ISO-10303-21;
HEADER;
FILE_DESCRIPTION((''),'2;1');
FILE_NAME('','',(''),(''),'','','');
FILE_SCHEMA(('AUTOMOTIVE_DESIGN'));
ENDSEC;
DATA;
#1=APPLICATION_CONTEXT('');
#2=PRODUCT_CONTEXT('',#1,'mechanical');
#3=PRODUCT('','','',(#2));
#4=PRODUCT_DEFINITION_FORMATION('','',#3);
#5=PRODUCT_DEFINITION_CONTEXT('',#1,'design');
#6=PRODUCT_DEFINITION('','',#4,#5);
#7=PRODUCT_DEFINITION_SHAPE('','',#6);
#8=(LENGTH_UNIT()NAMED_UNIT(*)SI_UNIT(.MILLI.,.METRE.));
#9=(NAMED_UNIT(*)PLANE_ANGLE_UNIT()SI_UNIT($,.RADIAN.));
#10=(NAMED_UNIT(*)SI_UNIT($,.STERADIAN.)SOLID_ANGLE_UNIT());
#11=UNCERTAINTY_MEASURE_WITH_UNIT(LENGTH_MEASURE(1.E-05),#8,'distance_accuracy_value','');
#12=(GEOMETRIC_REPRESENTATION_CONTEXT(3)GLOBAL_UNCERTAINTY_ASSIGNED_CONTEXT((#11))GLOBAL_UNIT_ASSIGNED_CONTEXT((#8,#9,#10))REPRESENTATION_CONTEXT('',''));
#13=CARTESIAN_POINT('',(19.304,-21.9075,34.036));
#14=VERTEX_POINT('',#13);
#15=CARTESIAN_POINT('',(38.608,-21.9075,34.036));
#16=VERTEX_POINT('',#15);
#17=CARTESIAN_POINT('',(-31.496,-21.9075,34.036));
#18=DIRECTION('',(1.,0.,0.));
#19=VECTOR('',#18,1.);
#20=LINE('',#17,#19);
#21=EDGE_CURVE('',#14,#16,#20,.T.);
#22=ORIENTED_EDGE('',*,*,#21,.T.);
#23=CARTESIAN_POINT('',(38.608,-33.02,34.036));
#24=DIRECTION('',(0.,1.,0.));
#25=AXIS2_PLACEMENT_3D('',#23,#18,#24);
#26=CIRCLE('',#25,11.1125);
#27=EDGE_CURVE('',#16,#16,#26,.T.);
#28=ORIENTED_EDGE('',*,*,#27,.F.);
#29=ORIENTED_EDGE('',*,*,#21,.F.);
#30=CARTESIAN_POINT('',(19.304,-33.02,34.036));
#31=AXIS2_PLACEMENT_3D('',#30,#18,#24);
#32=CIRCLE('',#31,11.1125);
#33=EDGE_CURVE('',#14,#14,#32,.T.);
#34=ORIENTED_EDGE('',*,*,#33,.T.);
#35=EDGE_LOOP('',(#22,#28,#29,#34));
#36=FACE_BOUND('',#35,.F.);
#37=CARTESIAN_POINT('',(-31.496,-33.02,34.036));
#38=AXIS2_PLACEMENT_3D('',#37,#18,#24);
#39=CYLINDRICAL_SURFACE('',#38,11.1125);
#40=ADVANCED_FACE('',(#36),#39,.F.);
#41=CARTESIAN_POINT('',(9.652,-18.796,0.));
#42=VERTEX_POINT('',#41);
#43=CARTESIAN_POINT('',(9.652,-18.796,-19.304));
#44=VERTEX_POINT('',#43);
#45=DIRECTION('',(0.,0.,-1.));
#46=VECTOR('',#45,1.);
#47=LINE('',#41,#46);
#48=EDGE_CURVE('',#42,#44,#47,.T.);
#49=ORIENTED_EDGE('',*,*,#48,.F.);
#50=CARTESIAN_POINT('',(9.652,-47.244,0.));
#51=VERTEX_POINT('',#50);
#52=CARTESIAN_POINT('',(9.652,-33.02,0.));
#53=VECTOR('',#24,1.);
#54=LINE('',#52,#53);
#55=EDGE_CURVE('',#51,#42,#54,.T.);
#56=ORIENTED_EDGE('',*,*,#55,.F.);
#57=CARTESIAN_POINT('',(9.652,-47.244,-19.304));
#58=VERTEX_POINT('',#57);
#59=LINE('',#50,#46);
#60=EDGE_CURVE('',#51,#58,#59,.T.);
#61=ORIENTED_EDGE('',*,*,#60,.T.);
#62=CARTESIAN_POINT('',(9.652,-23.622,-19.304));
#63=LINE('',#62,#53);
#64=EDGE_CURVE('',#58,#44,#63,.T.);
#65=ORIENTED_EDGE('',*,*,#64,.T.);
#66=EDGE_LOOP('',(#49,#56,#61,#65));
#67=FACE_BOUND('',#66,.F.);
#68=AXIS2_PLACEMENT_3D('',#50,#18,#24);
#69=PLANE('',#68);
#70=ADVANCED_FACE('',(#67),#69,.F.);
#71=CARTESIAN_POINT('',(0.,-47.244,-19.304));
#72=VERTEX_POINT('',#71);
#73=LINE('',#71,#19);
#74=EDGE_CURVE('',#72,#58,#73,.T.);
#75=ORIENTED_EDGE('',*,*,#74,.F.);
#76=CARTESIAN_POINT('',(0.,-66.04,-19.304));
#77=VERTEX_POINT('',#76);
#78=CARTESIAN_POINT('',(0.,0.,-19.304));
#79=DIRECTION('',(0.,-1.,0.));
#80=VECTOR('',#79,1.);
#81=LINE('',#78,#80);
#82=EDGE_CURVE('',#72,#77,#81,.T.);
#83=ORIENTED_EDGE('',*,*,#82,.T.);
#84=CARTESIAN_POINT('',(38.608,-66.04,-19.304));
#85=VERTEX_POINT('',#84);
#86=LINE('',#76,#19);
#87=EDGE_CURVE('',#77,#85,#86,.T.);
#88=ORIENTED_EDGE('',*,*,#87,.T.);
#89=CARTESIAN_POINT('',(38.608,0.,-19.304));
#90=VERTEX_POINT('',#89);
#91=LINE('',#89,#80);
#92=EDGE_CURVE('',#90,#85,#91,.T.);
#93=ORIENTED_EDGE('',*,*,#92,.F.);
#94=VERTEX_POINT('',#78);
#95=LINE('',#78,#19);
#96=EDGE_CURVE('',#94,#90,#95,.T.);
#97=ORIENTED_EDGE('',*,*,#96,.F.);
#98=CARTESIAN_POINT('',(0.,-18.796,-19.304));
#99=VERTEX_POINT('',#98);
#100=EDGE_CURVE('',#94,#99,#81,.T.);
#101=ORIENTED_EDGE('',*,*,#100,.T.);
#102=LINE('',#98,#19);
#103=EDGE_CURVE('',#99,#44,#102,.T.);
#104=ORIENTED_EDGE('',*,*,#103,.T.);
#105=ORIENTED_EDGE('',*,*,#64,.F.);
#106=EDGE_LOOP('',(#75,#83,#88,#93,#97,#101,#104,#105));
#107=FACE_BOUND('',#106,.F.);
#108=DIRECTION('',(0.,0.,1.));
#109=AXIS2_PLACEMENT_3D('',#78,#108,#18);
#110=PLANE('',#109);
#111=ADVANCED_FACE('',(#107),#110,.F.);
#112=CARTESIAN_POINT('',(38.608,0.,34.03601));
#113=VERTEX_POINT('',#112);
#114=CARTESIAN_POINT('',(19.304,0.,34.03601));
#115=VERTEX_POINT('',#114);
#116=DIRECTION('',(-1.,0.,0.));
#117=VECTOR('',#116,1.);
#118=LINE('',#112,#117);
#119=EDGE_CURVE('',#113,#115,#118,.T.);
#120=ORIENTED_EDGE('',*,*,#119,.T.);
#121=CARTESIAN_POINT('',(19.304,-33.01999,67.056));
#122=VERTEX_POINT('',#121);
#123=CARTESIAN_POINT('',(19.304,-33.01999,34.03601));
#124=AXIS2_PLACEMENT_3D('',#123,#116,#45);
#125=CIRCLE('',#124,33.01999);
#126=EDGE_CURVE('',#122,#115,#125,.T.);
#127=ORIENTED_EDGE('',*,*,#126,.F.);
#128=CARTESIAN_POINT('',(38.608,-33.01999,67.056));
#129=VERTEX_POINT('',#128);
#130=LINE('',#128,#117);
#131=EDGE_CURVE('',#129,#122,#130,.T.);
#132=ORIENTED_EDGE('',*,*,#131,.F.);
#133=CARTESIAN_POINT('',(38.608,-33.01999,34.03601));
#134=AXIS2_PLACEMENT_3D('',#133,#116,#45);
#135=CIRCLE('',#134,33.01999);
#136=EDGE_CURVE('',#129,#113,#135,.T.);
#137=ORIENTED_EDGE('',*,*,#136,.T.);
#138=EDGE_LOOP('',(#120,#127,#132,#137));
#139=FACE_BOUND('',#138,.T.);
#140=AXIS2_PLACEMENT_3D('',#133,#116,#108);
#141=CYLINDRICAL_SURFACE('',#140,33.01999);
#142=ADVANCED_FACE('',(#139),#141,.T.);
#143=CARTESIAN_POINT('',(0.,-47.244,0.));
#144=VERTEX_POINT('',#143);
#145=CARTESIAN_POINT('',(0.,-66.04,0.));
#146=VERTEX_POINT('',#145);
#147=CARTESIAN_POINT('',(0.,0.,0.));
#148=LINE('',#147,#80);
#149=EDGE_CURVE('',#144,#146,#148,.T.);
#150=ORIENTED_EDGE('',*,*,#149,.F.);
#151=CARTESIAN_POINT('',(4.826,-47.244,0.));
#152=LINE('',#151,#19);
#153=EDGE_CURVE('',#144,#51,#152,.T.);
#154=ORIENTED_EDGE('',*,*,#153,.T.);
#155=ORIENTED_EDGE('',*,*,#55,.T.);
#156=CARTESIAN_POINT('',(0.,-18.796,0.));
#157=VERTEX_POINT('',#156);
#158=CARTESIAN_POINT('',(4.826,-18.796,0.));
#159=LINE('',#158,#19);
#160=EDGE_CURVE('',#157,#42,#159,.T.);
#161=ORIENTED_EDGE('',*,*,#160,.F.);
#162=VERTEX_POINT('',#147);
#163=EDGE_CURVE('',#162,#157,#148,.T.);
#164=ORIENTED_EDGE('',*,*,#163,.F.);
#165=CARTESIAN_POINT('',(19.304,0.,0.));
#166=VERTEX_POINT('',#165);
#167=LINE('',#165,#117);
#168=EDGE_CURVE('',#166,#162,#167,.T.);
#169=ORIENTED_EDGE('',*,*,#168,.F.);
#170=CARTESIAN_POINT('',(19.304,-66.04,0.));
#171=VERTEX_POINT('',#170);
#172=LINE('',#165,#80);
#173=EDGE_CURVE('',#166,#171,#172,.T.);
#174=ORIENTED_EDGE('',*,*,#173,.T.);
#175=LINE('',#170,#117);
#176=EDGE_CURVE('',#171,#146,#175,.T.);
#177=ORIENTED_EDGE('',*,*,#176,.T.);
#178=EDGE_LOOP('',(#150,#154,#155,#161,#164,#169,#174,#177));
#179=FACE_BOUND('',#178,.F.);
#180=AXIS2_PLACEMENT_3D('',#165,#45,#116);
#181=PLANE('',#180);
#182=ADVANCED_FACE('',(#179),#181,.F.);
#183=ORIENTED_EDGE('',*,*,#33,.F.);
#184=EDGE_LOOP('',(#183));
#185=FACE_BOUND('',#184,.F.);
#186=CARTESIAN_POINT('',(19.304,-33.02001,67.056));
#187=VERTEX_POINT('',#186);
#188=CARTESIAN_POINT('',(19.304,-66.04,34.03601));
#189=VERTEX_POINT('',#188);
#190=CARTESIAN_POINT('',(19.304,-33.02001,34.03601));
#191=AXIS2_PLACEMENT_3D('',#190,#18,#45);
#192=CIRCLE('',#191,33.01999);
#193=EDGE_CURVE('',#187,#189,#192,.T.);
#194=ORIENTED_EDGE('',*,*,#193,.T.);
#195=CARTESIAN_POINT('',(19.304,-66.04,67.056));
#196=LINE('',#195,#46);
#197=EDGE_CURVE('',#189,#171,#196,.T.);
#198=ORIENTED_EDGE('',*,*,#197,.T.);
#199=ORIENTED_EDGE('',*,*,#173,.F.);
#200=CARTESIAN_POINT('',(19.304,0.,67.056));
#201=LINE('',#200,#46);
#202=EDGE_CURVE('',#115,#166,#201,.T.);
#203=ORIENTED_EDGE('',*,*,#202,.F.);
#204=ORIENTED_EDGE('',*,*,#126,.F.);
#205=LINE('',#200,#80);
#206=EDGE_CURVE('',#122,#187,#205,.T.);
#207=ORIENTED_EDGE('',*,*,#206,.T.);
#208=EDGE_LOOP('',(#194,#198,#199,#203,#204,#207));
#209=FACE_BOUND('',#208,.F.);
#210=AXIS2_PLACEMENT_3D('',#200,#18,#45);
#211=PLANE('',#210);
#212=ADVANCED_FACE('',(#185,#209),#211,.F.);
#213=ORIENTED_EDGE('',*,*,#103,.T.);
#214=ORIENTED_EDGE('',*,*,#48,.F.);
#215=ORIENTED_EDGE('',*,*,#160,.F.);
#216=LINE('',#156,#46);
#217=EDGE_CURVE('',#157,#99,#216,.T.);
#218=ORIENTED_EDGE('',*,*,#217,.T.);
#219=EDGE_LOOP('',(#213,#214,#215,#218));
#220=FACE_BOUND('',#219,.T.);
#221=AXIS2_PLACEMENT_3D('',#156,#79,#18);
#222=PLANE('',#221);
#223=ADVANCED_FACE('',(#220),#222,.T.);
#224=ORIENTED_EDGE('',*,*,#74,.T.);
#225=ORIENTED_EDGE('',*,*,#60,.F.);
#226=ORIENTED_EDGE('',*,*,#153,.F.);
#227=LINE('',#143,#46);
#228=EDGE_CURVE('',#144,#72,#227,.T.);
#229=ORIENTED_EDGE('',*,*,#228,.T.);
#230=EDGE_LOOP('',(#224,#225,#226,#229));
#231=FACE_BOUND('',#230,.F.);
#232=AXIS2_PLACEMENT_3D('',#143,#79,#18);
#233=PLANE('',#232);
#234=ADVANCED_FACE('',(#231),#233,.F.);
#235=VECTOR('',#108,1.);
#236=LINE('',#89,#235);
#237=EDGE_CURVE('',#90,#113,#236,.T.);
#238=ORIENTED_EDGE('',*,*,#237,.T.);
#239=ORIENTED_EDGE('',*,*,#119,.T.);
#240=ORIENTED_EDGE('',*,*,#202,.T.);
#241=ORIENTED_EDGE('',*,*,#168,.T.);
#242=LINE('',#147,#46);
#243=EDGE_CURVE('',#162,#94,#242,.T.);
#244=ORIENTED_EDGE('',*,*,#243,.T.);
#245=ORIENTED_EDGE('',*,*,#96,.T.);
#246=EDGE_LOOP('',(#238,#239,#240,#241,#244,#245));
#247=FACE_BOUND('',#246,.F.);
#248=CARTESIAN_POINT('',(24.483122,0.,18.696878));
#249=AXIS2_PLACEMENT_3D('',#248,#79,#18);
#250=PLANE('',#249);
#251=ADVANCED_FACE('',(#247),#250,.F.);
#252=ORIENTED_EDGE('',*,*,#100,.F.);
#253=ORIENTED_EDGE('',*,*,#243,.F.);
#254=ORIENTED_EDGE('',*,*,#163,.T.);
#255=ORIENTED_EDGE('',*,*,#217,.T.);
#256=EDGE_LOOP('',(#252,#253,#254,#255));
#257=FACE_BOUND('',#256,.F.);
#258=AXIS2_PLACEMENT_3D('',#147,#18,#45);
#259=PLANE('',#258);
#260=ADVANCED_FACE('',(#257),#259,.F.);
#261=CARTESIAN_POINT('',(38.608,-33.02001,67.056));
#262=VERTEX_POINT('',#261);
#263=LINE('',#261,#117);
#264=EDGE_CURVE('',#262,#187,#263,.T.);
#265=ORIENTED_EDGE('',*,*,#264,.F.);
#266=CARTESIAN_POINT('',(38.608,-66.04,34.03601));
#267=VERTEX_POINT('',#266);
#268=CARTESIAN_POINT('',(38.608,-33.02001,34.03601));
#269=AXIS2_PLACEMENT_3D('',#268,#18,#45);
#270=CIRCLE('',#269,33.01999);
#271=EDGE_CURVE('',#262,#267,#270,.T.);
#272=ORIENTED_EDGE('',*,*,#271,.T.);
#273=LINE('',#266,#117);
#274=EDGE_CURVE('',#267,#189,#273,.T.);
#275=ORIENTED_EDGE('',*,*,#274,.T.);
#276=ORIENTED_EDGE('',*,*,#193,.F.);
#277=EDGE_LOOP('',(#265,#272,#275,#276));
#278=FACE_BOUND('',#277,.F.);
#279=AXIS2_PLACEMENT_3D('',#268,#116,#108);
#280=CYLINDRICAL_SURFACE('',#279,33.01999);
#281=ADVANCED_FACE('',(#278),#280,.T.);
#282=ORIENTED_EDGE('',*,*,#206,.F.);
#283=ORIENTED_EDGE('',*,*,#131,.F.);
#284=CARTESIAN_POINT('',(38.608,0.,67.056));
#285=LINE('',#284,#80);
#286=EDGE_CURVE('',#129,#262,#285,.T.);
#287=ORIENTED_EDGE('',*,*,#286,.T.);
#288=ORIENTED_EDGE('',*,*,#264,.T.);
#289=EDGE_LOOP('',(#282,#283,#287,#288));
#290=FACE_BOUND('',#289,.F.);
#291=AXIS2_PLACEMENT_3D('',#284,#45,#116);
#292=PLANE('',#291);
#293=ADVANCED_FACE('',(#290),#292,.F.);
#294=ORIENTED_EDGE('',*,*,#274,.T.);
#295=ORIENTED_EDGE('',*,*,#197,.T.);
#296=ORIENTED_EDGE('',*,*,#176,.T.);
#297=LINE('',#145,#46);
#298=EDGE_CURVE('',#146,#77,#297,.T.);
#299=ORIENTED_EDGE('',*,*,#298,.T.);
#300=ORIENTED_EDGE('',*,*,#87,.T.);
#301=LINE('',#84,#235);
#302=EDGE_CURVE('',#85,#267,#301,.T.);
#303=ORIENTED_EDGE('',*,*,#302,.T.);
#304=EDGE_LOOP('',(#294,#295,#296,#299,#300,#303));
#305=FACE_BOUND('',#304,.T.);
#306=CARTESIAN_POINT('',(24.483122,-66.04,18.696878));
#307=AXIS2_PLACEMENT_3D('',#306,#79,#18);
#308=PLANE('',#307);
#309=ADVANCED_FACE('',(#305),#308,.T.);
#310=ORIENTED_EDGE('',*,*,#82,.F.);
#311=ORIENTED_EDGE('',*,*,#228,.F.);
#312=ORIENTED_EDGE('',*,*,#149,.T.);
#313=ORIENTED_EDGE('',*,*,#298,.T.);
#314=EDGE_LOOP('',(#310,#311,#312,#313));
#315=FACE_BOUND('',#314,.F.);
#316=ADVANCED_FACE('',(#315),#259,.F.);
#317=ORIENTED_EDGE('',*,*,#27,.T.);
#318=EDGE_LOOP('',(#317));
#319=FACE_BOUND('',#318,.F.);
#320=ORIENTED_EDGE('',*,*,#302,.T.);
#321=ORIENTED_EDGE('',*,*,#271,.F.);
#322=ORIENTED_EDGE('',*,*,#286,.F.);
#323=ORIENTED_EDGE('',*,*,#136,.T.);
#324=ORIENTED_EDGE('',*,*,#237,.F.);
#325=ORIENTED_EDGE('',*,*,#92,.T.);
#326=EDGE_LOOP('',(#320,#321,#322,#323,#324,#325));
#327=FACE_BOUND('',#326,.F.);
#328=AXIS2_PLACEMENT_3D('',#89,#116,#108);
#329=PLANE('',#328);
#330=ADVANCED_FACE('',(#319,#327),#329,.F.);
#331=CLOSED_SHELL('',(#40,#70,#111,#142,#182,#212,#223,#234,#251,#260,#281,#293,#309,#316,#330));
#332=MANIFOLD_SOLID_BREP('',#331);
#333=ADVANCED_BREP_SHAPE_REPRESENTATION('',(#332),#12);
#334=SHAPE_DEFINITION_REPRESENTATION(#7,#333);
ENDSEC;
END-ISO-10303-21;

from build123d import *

# Parameters (mm, degrees)
F1_DEPTH = 66.04
F2_R     = 33.01999
F4_D     = 22.225
F4_DEPTH = 50.8
F4_TIP   = 6.6770636289
F5_W     = 9.652
F5_H     = 28.448
F6_DEPTH = 25.4


# Not quite as in the source:
# - a fillet or chamfer is up to 0.001 mm smaller than in the source, because OpenCascade refuses the exact size


with BuildPart() as f1:
    # F0 (on Front) → F1 (new body)
    with BuildSketch(Plane.XZ):
        Polygon((19.304, 0), (0, 0), (0, -19.304), (38.608, -19.304), (38.608, 67.056), (19.304, 67.056), align=None)
    extrude(amount=F1_DEPTH)

    # F2 (radius 33.02 in the source; OpenCascade refuses exactly that, so slightly less here)
    f2_edges = [f1.edges().sort_by_distance(p)[0] for p in [
        (28.956, 0, 67.056),
        (28.956, -66.04, 67.056),
    ]]
    fillet(f2_edges, radius=F2_R)

    # F4
    with Locations(Plane(origin=(19.304, 0, 0), x_dir=(0, -1, 0), z_dir=(-1, 0, 0))):
        with Locations((33.02, 34.036)):
            Hole(F4_D / 2, depth=F4_DEPTH)
            with Locations((0, 0, -(F4_DEPTH + F4_TIP / 2))):  # 118° drill point
                Cone(0, F4_D / 2, F4_TIP, mode=Mode.SUBTRACT)

    # F5 (on face) → F6 (cut)
    with BuildSketch(Plane.XY):
        with Locations((4.826, -33.02)):
            Rectangle(F5_W, F5_H)
    extrude(amount=-F6_DEPTH, mode=Mode.SUBTRACT)


solid = f1.part
